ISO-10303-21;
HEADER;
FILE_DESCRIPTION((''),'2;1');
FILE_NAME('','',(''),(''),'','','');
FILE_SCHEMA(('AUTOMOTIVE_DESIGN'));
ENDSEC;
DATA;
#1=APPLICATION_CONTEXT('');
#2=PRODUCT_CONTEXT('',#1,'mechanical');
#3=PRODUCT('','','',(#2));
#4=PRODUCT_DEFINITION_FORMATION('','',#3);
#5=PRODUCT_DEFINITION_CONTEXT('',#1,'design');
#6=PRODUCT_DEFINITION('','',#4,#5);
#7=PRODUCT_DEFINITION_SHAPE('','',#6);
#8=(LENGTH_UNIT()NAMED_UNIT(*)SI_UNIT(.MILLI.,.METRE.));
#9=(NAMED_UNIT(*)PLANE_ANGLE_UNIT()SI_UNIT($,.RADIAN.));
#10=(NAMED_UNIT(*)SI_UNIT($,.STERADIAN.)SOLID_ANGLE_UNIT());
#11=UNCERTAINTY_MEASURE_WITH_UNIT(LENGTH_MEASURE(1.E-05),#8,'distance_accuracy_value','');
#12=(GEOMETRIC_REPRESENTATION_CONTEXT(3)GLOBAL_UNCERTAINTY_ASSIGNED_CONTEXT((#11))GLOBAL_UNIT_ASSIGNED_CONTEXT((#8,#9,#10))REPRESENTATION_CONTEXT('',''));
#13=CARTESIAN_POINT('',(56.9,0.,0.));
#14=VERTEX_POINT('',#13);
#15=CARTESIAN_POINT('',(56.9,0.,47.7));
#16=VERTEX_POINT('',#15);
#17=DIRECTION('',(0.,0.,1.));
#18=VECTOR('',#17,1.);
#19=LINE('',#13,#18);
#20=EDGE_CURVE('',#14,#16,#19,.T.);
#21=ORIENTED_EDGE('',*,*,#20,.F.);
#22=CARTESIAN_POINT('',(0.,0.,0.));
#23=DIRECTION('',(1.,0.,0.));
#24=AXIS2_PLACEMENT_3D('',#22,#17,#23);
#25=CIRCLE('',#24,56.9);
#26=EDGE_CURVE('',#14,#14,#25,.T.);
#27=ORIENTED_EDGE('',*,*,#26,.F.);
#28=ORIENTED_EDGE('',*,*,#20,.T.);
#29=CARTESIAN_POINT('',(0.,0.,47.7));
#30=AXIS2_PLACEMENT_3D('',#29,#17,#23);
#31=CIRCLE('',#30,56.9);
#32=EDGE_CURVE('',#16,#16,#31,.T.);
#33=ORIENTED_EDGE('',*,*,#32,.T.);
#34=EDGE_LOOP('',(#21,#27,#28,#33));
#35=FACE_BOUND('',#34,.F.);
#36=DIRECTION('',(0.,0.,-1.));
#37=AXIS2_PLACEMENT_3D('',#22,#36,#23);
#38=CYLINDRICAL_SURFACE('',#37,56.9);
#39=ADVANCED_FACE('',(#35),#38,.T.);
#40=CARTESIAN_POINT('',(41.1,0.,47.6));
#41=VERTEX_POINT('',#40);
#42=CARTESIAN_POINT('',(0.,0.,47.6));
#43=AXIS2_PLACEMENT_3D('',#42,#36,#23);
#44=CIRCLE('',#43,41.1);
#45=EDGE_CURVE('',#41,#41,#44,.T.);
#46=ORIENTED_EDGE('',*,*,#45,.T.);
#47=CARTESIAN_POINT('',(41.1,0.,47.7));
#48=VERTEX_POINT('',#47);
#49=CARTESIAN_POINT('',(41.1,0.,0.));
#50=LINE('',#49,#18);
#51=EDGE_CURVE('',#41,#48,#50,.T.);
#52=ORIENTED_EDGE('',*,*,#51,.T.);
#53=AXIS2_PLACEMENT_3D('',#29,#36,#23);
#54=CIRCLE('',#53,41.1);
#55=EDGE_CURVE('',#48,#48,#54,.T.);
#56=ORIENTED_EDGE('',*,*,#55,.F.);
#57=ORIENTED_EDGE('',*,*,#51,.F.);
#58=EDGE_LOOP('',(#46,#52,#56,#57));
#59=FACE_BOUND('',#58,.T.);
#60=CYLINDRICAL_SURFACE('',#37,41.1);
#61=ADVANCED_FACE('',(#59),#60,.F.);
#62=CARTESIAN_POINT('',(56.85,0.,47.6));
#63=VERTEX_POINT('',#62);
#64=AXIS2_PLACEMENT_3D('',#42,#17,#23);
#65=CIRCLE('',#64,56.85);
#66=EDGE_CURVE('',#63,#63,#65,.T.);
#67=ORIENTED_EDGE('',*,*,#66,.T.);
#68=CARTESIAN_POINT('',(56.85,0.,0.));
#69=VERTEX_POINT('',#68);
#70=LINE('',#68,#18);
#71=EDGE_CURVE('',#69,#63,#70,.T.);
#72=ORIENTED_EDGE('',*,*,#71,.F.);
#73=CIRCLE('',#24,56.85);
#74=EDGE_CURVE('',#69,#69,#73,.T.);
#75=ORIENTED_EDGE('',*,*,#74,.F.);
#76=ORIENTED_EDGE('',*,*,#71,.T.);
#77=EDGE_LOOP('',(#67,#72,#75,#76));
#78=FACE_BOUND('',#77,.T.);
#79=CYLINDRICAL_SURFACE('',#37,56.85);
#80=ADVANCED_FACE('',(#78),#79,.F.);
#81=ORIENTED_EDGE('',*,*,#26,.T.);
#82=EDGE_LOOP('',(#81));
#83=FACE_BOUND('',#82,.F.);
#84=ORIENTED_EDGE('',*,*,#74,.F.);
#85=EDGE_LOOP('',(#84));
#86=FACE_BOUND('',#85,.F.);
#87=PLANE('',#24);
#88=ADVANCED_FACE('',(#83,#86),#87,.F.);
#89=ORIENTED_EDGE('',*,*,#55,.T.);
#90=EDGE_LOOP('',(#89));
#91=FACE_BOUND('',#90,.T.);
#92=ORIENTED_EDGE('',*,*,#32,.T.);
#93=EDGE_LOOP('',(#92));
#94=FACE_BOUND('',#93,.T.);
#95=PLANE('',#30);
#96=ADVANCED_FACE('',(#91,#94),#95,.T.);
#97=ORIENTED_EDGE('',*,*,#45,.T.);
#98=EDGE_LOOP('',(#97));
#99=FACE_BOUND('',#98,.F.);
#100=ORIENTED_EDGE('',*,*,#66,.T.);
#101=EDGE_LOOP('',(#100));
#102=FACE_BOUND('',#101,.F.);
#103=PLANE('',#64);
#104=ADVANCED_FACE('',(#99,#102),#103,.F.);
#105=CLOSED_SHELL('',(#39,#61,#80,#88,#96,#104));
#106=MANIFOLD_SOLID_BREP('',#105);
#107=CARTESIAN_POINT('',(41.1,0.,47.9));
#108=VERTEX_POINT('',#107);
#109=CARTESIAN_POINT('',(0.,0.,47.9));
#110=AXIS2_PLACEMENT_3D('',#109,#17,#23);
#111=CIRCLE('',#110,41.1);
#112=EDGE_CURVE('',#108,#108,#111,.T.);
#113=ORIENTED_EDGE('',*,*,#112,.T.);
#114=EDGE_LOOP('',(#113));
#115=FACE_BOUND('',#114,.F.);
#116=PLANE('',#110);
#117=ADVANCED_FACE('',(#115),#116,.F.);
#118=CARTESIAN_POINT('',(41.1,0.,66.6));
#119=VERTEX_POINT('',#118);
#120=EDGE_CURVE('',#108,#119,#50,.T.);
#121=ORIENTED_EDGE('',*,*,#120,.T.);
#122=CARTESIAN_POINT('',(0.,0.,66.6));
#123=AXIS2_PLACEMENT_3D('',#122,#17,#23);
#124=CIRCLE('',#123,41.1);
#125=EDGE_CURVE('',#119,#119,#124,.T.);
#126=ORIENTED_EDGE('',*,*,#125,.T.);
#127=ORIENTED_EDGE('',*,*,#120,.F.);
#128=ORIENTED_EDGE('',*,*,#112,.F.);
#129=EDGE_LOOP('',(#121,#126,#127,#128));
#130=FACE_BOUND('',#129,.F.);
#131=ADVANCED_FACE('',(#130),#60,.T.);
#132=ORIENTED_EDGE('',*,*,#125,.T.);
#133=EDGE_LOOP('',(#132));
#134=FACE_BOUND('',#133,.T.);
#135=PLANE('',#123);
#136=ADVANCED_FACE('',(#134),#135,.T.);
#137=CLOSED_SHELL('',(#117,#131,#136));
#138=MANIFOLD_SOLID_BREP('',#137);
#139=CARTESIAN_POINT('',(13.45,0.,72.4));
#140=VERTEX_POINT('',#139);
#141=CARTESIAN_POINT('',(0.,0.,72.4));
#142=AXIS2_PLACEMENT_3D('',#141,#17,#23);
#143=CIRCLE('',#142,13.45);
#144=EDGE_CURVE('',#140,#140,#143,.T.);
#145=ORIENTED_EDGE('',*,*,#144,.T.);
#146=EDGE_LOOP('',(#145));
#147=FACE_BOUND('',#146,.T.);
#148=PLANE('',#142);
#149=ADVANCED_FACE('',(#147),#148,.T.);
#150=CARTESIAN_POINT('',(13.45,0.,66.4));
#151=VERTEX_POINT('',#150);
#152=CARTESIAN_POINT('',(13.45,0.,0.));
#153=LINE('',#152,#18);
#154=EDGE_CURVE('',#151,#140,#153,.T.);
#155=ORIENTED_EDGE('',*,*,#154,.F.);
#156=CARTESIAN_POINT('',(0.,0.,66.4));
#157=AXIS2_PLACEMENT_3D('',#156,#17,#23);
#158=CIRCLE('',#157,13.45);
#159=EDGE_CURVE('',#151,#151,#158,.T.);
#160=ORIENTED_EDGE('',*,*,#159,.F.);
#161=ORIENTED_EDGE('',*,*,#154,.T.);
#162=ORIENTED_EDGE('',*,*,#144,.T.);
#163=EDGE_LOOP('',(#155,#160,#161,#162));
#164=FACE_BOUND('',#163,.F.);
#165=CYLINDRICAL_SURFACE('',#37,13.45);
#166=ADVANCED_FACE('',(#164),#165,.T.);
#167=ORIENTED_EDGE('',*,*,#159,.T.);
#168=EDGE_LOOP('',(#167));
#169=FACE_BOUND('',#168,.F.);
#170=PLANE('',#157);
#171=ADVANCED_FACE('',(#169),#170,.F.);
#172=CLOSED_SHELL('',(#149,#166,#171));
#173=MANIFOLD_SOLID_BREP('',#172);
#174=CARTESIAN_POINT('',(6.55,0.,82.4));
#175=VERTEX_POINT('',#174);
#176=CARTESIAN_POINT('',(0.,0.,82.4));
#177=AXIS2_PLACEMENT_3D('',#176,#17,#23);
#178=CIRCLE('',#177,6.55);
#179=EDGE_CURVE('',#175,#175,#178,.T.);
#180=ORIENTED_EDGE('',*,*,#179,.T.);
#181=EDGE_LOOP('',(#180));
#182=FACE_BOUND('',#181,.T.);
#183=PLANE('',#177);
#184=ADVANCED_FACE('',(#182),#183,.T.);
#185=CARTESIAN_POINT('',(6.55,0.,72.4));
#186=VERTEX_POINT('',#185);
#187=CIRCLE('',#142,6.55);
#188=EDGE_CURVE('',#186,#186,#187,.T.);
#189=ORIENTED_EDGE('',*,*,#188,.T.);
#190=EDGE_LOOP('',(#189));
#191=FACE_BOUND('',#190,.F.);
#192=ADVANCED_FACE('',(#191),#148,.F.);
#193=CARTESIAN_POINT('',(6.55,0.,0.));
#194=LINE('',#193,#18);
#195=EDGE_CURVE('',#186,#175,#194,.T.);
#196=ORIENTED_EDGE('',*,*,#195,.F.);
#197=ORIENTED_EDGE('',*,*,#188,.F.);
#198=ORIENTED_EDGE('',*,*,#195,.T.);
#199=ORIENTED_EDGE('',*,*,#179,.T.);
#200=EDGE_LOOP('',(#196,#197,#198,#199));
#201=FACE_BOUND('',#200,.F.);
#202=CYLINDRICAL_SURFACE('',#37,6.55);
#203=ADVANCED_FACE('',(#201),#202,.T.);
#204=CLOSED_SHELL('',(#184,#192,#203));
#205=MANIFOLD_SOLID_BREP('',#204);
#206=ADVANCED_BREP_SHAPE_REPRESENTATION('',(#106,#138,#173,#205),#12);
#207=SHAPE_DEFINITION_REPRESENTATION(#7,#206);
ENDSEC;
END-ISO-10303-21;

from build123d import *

# Parameters (mm, degrees)
F0_R      = 56.9
F1_DEPTH  = 47.7
F2_R      = 56.85
F3_DEPTH  = 47.6
F4_R      = 41.1
F5_DEPTH  = 66.6
F6_DEPTH  = 47.9
F7_R      = 13.45
F8_DEPTH  = 72.4
F9_DEPTH  = 66.4
F10_R     = 6.55
F11_DEPTH = 82.4
F12_DEPTH = 72.4


with BuildPart() as f1:
    # F0 (on Top) → F1 (new body)
    with BuildSketch(Plane.XY):
        Circle(F0_R)
    extrude(amount=F1_DEPTH)

    # F2 (on Top) → F3 (cut)
    with BuildSketch(Plane.XY):
        Circle(F2_R)
    extrude(amount=F3_DEPTH, mode=Mode.SUBTRACT)


with BuildPart() as f5:
    # F4 (on Top) → F5 (new body)
    with BuildSketch(Plane.XY):
        Circle(F4_R)
    extrude(amount=F5_DEPTH)


with BuildPart() as f6_tool:
    # F4 (on Top) → F6 (new body)
    with BuildSketch(Plane.XY):
        Circle(F4_R)
    extrude(amount=F6_DEPTH)


with BuildPart() as f1_1:
    add(f1.part)

    # F6: cut by f6_tool
    add(f6_tool.part, mode=Mode.SUBTRACT)


with BuildPart() as f5_1:
    add(f5.part)

    # F6: cut by f6_tool
    add(f6_tool.part, mode=Mode.SUBTRACT)


with BuildPart() as f8:
    # F7 (on Top) → F8 (new body)
    with BuildSketch(Plane.XY):
        Circle(F7_R)
    extrude(amount=F8_DEPTH)

    # F7 (on Top) → F9 (cut)
    with BuildSketch(Plane.XY):
        Circle(F7_R)
    extrude(amount=F9_DEPTH, mode=Mode.SUBTRACT)


with BuildPart() as f11:
    # F10 (on Top) → F11 (new body)
    with BuildSketch(Plane.XY):
        Circle(F10_R)
    extrude(amount=F11_DEPTH)

    # F10 (on Top) → F12 (cut)
    with BuildSketch(Plane.XY):
        Circle(F10_R)
    extrude(amount=F12_DEPTH, mode=Mode.SUBTRACT)


solid = Compound([f1_1.part, f5_1.part, f8.part, f11.part])
